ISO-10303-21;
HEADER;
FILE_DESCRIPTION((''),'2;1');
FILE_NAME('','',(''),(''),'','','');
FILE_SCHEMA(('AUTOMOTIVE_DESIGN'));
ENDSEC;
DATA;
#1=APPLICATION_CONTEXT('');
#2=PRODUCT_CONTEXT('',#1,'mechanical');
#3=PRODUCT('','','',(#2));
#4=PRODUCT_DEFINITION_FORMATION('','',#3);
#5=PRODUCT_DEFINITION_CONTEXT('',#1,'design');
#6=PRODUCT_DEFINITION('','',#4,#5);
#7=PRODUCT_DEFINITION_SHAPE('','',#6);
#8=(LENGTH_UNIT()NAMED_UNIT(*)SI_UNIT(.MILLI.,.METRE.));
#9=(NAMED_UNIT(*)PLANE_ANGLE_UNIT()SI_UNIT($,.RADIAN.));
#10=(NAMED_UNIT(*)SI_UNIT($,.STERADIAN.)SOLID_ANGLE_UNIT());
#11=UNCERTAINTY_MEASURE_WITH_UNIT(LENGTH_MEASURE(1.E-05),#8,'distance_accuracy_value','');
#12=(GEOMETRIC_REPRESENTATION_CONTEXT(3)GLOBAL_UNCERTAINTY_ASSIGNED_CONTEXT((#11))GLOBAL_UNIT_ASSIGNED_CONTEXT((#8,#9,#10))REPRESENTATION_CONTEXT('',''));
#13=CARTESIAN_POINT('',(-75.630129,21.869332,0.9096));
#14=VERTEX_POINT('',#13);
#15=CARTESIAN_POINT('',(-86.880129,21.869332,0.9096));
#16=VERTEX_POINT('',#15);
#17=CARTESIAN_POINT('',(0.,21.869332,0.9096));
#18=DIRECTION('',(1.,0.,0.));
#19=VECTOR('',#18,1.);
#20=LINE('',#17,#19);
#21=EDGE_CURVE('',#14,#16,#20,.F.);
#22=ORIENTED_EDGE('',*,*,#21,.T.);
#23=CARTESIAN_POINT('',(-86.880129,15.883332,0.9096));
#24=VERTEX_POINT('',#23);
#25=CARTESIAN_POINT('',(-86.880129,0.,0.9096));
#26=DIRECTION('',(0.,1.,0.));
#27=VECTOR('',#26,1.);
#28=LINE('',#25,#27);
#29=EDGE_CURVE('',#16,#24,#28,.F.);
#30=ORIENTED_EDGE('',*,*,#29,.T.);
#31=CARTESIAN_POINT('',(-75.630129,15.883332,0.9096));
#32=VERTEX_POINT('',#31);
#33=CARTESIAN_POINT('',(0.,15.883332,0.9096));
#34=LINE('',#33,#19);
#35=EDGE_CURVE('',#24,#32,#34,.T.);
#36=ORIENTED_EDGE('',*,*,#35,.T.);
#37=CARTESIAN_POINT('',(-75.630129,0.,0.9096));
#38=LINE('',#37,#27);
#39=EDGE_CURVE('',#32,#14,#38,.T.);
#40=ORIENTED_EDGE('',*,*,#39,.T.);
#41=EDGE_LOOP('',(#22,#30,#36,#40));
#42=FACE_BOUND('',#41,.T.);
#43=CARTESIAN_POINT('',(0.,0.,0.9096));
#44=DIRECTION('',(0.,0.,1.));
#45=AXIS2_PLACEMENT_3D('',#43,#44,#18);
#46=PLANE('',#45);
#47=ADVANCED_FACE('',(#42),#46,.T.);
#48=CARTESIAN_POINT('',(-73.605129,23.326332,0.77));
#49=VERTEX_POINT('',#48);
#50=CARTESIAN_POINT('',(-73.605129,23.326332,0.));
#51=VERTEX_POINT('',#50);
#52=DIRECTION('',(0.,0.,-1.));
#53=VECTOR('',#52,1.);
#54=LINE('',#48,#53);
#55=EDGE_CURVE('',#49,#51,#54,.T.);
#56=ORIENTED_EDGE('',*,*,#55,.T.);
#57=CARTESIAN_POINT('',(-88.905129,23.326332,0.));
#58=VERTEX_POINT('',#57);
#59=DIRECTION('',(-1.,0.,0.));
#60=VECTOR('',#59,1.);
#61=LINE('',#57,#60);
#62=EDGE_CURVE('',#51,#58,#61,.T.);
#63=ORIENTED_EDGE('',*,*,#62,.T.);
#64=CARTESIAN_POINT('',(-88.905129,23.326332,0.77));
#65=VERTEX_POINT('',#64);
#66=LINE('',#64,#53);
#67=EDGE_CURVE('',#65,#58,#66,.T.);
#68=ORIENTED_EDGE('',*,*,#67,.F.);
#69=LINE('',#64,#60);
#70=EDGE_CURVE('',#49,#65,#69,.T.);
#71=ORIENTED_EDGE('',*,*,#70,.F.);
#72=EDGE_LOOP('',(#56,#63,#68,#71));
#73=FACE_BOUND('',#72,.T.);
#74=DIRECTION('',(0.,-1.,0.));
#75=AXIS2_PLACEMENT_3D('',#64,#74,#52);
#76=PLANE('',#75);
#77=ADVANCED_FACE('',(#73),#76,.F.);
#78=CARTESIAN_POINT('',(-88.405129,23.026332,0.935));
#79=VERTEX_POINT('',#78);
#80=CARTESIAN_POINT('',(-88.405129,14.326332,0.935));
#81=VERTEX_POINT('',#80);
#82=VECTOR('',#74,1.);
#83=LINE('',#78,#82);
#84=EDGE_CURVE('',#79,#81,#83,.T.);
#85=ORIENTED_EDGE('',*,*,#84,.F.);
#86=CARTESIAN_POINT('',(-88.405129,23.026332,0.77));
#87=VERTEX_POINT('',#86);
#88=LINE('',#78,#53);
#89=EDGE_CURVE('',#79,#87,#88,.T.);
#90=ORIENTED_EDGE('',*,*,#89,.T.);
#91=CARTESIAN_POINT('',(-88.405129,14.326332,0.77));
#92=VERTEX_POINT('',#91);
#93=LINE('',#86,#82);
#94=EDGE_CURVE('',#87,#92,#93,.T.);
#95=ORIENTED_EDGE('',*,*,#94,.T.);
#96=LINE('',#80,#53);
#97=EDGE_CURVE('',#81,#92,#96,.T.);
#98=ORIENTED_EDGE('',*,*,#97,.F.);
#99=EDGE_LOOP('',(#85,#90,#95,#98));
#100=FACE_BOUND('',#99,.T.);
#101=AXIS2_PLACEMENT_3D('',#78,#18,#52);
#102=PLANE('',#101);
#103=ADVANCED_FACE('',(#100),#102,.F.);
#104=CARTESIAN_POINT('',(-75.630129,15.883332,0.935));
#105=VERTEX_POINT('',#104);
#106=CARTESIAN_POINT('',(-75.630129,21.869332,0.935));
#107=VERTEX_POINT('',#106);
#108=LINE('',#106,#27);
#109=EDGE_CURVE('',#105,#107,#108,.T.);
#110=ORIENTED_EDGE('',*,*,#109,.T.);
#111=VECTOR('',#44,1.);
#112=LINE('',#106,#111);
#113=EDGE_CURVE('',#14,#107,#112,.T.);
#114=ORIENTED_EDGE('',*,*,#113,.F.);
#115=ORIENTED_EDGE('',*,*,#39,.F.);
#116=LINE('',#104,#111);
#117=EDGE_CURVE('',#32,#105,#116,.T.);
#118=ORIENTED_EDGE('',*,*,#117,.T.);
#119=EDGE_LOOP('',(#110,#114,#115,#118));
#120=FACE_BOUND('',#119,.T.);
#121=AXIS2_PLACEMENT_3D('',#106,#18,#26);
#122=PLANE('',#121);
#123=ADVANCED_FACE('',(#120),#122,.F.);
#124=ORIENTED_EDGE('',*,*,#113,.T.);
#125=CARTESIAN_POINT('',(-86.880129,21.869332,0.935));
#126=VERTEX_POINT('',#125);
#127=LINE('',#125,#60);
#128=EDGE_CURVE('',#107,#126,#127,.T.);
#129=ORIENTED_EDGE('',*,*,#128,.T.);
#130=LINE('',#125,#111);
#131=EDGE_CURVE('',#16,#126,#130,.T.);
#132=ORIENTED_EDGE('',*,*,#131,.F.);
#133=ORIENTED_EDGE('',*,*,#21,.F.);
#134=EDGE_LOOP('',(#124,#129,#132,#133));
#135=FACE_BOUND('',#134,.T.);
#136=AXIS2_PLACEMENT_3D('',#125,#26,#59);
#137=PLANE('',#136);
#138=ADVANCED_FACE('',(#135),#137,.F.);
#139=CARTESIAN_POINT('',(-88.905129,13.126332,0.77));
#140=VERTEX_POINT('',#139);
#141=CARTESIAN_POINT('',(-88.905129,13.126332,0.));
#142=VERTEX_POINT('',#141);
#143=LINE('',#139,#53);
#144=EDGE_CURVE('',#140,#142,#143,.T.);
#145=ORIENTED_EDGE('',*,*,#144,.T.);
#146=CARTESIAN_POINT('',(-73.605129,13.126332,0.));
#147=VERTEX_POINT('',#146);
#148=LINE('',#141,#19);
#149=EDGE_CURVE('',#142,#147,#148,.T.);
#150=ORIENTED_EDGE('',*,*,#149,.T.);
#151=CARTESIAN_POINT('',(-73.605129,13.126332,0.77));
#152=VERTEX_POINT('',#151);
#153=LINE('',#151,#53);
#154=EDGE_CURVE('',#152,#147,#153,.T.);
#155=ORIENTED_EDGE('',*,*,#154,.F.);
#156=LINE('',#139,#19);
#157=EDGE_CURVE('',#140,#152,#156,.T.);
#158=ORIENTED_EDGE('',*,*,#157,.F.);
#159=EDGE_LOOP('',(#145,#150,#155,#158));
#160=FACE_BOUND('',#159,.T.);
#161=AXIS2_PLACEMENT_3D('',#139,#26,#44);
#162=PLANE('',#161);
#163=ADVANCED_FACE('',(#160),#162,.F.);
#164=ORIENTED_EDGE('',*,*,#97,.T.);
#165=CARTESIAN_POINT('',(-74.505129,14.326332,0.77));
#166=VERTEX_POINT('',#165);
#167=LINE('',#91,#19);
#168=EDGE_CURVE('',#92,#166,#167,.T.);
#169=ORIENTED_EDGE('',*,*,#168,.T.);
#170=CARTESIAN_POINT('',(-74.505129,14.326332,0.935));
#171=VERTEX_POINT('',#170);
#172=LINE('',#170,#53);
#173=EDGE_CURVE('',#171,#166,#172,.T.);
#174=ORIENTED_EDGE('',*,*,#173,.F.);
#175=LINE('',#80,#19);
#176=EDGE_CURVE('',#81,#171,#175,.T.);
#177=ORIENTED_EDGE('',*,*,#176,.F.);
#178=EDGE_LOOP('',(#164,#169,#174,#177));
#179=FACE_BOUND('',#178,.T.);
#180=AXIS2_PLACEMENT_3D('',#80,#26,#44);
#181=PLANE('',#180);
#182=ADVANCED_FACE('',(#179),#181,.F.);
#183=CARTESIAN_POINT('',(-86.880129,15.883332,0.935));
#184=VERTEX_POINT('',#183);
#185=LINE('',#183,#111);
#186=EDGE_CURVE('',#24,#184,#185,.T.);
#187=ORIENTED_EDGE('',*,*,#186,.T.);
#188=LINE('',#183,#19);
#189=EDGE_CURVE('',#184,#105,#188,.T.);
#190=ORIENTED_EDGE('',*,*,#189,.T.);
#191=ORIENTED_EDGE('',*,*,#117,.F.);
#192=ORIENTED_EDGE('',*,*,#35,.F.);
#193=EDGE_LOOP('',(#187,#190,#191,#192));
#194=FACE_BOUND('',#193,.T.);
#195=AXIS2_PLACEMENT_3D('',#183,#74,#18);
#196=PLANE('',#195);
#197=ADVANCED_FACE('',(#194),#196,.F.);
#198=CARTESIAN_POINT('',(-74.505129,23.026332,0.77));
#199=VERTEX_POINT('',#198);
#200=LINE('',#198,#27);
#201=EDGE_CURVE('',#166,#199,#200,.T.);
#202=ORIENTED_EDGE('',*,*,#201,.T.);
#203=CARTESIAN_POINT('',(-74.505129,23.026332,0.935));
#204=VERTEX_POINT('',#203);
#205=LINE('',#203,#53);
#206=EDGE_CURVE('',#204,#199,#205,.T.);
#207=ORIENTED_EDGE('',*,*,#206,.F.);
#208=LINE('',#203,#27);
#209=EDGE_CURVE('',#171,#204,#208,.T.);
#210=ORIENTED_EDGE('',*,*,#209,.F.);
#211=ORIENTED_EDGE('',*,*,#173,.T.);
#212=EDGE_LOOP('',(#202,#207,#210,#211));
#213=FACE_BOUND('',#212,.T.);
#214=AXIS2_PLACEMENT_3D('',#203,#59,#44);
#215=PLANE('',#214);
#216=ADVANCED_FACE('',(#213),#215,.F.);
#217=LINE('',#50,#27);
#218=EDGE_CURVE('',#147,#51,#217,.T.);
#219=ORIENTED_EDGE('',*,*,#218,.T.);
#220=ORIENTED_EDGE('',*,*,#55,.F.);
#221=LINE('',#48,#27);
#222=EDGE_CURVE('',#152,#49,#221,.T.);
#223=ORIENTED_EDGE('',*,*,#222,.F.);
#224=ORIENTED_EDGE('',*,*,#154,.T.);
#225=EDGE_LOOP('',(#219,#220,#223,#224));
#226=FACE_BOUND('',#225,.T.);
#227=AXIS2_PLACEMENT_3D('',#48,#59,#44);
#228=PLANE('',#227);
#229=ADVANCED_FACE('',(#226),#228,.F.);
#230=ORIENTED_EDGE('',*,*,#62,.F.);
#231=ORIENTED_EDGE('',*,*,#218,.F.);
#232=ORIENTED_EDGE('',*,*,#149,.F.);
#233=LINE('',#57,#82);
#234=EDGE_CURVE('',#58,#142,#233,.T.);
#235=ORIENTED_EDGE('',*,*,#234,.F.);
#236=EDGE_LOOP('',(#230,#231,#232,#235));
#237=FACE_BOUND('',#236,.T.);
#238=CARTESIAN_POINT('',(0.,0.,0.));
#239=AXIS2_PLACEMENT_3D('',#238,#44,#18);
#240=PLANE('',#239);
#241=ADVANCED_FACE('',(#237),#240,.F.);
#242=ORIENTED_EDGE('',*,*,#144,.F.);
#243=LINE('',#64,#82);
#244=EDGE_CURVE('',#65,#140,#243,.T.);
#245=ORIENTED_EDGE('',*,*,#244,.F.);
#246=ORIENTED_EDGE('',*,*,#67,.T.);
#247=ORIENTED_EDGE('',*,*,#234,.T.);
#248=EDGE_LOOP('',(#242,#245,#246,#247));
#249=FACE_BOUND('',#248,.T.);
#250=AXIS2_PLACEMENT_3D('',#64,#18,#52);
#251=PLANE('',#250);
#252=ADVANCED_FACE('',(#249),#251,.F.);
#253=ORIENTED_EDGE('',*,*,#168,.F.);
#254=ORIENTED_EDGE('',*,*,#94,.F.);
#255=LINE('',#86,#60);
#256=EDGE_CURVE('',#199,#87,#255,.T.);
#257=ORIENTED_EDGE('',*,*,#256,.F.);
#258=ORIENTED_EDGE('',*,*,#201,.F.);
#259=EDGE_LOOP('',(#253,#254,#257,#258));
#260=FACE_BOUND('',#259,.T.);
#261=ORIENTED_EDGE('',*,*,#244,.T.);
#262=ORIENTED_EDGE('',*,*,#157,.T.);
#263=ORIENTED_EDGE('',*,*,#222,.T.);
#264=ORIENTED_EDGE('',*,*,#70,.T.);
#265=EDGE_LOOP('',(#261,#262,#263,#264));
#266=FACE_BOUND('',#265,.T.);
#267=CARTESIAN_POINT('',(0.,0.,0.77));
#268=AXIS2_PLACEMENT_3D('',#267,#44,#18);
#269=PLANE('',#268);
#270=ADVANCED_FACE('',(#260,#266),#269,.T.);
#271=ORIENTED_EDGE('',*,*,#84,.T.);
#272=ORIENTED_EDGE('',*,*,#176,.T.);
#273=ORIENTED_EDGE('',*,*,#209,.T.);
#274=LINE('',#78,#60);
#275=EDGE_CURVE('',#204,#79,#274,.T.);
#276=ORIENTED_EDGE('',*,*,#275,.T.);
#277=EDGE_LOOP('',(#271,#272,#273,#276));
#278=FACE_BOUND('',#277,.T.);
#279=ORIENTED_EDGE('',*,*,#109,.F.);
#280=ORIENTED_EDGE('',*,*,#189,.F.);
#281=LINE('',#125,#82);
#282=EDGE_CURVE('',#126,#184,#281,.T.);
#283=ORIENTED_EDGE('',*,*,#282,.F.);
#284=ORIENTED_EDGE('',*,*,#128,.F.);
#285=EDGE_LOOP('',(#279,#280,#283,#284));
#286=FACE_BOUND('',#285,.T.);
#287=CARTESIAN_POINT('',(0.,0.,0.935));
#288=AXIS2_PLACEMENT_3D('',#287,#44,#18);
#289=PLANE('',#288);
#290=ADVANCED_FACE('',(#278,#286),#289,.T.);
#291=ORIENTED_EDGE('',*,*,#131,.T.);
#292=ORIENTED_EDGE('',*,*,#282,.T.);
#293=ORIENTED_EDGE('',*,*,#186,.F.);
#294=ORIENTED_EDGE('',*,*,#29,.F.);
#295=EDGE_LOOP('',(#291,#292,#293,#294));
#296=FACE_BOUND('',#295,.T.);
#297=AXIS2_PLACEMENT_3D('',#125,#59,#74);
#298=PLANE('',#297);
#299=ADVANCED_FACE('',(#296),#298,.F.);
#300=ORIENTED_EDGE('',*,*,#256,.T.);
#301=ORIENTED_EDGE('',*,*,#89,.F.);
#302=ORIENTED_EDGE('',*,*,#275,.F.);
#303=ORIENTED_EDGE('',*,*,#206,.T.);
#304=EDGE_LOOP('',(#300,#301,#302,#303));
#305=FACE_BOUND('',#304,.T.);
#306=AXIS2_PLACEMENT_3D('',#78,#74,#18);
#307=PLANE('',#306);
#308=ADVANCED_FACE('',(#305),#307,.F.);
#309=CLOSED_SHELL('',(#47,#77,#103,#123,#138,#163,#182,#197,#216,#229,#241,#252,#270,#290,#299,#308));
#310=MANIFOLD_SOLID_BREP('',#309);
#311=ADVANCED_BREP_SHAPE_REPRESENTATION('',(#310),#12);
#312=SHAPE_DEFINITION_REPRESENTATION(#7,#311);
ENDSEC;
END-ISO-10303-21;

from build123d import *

# Parameters (mm, degrees)
SKETCH1_W           = 15.3
SKETCH1_H           = 10.2
BOSS_EXTRUDE1_DEPTH = 0.769999908
SKETCH2_W           = 13.9
SKETCH2_H           = 8.7
BOSS_EXTRUDE2_DEPTH = 0.165
WRAP1_START         = -0.0254
WRAP1_OUTLINE_W     = 11.25
WRAP1_OUTLINE_H     = 5.986
WRAP1_DEPTH         = 0.0254


# Read off the part's stored shape, not the designer's step: Wrap1
with BuildPart() as part:
    # Sketch1 → Boss-Extrude1 (new body)
    with BuildSketch(Plane.XY):
        with Locations((-81.255128869, 18.226331852)):
            Rectangle(SKETCH1_W, SKETCH1_H)
    extrude(amount=BOSS_EXTRUDE1_DEPTH)

    # Sketch2 → Boss-Extrude2 (add)
    with BuildSketch(Plane.XY.offset(0.769999908)):
        with Locations((-81.455128869, 18.676331852)):
            Rectangle(SKETCH2_W, SKETCH2_H)
    extrude(amount=BOSS_EXTRUDE2_DEPTH)

    # Wrap1 outline → Wrap1 (cut)
    with BuildSketch(Plane.XY.offset(0.934999908).offset(WRAP1_START)):
        with Locations((-81.255128869, 18.876331852)):
            Rectangle(WRAP1_OUTLINE_W, WRAP1_OUTLINE_H)
    extrude(amount=WRAP1_DEPTH, mode=Mode.SUBTRACT)


solid = part.part
